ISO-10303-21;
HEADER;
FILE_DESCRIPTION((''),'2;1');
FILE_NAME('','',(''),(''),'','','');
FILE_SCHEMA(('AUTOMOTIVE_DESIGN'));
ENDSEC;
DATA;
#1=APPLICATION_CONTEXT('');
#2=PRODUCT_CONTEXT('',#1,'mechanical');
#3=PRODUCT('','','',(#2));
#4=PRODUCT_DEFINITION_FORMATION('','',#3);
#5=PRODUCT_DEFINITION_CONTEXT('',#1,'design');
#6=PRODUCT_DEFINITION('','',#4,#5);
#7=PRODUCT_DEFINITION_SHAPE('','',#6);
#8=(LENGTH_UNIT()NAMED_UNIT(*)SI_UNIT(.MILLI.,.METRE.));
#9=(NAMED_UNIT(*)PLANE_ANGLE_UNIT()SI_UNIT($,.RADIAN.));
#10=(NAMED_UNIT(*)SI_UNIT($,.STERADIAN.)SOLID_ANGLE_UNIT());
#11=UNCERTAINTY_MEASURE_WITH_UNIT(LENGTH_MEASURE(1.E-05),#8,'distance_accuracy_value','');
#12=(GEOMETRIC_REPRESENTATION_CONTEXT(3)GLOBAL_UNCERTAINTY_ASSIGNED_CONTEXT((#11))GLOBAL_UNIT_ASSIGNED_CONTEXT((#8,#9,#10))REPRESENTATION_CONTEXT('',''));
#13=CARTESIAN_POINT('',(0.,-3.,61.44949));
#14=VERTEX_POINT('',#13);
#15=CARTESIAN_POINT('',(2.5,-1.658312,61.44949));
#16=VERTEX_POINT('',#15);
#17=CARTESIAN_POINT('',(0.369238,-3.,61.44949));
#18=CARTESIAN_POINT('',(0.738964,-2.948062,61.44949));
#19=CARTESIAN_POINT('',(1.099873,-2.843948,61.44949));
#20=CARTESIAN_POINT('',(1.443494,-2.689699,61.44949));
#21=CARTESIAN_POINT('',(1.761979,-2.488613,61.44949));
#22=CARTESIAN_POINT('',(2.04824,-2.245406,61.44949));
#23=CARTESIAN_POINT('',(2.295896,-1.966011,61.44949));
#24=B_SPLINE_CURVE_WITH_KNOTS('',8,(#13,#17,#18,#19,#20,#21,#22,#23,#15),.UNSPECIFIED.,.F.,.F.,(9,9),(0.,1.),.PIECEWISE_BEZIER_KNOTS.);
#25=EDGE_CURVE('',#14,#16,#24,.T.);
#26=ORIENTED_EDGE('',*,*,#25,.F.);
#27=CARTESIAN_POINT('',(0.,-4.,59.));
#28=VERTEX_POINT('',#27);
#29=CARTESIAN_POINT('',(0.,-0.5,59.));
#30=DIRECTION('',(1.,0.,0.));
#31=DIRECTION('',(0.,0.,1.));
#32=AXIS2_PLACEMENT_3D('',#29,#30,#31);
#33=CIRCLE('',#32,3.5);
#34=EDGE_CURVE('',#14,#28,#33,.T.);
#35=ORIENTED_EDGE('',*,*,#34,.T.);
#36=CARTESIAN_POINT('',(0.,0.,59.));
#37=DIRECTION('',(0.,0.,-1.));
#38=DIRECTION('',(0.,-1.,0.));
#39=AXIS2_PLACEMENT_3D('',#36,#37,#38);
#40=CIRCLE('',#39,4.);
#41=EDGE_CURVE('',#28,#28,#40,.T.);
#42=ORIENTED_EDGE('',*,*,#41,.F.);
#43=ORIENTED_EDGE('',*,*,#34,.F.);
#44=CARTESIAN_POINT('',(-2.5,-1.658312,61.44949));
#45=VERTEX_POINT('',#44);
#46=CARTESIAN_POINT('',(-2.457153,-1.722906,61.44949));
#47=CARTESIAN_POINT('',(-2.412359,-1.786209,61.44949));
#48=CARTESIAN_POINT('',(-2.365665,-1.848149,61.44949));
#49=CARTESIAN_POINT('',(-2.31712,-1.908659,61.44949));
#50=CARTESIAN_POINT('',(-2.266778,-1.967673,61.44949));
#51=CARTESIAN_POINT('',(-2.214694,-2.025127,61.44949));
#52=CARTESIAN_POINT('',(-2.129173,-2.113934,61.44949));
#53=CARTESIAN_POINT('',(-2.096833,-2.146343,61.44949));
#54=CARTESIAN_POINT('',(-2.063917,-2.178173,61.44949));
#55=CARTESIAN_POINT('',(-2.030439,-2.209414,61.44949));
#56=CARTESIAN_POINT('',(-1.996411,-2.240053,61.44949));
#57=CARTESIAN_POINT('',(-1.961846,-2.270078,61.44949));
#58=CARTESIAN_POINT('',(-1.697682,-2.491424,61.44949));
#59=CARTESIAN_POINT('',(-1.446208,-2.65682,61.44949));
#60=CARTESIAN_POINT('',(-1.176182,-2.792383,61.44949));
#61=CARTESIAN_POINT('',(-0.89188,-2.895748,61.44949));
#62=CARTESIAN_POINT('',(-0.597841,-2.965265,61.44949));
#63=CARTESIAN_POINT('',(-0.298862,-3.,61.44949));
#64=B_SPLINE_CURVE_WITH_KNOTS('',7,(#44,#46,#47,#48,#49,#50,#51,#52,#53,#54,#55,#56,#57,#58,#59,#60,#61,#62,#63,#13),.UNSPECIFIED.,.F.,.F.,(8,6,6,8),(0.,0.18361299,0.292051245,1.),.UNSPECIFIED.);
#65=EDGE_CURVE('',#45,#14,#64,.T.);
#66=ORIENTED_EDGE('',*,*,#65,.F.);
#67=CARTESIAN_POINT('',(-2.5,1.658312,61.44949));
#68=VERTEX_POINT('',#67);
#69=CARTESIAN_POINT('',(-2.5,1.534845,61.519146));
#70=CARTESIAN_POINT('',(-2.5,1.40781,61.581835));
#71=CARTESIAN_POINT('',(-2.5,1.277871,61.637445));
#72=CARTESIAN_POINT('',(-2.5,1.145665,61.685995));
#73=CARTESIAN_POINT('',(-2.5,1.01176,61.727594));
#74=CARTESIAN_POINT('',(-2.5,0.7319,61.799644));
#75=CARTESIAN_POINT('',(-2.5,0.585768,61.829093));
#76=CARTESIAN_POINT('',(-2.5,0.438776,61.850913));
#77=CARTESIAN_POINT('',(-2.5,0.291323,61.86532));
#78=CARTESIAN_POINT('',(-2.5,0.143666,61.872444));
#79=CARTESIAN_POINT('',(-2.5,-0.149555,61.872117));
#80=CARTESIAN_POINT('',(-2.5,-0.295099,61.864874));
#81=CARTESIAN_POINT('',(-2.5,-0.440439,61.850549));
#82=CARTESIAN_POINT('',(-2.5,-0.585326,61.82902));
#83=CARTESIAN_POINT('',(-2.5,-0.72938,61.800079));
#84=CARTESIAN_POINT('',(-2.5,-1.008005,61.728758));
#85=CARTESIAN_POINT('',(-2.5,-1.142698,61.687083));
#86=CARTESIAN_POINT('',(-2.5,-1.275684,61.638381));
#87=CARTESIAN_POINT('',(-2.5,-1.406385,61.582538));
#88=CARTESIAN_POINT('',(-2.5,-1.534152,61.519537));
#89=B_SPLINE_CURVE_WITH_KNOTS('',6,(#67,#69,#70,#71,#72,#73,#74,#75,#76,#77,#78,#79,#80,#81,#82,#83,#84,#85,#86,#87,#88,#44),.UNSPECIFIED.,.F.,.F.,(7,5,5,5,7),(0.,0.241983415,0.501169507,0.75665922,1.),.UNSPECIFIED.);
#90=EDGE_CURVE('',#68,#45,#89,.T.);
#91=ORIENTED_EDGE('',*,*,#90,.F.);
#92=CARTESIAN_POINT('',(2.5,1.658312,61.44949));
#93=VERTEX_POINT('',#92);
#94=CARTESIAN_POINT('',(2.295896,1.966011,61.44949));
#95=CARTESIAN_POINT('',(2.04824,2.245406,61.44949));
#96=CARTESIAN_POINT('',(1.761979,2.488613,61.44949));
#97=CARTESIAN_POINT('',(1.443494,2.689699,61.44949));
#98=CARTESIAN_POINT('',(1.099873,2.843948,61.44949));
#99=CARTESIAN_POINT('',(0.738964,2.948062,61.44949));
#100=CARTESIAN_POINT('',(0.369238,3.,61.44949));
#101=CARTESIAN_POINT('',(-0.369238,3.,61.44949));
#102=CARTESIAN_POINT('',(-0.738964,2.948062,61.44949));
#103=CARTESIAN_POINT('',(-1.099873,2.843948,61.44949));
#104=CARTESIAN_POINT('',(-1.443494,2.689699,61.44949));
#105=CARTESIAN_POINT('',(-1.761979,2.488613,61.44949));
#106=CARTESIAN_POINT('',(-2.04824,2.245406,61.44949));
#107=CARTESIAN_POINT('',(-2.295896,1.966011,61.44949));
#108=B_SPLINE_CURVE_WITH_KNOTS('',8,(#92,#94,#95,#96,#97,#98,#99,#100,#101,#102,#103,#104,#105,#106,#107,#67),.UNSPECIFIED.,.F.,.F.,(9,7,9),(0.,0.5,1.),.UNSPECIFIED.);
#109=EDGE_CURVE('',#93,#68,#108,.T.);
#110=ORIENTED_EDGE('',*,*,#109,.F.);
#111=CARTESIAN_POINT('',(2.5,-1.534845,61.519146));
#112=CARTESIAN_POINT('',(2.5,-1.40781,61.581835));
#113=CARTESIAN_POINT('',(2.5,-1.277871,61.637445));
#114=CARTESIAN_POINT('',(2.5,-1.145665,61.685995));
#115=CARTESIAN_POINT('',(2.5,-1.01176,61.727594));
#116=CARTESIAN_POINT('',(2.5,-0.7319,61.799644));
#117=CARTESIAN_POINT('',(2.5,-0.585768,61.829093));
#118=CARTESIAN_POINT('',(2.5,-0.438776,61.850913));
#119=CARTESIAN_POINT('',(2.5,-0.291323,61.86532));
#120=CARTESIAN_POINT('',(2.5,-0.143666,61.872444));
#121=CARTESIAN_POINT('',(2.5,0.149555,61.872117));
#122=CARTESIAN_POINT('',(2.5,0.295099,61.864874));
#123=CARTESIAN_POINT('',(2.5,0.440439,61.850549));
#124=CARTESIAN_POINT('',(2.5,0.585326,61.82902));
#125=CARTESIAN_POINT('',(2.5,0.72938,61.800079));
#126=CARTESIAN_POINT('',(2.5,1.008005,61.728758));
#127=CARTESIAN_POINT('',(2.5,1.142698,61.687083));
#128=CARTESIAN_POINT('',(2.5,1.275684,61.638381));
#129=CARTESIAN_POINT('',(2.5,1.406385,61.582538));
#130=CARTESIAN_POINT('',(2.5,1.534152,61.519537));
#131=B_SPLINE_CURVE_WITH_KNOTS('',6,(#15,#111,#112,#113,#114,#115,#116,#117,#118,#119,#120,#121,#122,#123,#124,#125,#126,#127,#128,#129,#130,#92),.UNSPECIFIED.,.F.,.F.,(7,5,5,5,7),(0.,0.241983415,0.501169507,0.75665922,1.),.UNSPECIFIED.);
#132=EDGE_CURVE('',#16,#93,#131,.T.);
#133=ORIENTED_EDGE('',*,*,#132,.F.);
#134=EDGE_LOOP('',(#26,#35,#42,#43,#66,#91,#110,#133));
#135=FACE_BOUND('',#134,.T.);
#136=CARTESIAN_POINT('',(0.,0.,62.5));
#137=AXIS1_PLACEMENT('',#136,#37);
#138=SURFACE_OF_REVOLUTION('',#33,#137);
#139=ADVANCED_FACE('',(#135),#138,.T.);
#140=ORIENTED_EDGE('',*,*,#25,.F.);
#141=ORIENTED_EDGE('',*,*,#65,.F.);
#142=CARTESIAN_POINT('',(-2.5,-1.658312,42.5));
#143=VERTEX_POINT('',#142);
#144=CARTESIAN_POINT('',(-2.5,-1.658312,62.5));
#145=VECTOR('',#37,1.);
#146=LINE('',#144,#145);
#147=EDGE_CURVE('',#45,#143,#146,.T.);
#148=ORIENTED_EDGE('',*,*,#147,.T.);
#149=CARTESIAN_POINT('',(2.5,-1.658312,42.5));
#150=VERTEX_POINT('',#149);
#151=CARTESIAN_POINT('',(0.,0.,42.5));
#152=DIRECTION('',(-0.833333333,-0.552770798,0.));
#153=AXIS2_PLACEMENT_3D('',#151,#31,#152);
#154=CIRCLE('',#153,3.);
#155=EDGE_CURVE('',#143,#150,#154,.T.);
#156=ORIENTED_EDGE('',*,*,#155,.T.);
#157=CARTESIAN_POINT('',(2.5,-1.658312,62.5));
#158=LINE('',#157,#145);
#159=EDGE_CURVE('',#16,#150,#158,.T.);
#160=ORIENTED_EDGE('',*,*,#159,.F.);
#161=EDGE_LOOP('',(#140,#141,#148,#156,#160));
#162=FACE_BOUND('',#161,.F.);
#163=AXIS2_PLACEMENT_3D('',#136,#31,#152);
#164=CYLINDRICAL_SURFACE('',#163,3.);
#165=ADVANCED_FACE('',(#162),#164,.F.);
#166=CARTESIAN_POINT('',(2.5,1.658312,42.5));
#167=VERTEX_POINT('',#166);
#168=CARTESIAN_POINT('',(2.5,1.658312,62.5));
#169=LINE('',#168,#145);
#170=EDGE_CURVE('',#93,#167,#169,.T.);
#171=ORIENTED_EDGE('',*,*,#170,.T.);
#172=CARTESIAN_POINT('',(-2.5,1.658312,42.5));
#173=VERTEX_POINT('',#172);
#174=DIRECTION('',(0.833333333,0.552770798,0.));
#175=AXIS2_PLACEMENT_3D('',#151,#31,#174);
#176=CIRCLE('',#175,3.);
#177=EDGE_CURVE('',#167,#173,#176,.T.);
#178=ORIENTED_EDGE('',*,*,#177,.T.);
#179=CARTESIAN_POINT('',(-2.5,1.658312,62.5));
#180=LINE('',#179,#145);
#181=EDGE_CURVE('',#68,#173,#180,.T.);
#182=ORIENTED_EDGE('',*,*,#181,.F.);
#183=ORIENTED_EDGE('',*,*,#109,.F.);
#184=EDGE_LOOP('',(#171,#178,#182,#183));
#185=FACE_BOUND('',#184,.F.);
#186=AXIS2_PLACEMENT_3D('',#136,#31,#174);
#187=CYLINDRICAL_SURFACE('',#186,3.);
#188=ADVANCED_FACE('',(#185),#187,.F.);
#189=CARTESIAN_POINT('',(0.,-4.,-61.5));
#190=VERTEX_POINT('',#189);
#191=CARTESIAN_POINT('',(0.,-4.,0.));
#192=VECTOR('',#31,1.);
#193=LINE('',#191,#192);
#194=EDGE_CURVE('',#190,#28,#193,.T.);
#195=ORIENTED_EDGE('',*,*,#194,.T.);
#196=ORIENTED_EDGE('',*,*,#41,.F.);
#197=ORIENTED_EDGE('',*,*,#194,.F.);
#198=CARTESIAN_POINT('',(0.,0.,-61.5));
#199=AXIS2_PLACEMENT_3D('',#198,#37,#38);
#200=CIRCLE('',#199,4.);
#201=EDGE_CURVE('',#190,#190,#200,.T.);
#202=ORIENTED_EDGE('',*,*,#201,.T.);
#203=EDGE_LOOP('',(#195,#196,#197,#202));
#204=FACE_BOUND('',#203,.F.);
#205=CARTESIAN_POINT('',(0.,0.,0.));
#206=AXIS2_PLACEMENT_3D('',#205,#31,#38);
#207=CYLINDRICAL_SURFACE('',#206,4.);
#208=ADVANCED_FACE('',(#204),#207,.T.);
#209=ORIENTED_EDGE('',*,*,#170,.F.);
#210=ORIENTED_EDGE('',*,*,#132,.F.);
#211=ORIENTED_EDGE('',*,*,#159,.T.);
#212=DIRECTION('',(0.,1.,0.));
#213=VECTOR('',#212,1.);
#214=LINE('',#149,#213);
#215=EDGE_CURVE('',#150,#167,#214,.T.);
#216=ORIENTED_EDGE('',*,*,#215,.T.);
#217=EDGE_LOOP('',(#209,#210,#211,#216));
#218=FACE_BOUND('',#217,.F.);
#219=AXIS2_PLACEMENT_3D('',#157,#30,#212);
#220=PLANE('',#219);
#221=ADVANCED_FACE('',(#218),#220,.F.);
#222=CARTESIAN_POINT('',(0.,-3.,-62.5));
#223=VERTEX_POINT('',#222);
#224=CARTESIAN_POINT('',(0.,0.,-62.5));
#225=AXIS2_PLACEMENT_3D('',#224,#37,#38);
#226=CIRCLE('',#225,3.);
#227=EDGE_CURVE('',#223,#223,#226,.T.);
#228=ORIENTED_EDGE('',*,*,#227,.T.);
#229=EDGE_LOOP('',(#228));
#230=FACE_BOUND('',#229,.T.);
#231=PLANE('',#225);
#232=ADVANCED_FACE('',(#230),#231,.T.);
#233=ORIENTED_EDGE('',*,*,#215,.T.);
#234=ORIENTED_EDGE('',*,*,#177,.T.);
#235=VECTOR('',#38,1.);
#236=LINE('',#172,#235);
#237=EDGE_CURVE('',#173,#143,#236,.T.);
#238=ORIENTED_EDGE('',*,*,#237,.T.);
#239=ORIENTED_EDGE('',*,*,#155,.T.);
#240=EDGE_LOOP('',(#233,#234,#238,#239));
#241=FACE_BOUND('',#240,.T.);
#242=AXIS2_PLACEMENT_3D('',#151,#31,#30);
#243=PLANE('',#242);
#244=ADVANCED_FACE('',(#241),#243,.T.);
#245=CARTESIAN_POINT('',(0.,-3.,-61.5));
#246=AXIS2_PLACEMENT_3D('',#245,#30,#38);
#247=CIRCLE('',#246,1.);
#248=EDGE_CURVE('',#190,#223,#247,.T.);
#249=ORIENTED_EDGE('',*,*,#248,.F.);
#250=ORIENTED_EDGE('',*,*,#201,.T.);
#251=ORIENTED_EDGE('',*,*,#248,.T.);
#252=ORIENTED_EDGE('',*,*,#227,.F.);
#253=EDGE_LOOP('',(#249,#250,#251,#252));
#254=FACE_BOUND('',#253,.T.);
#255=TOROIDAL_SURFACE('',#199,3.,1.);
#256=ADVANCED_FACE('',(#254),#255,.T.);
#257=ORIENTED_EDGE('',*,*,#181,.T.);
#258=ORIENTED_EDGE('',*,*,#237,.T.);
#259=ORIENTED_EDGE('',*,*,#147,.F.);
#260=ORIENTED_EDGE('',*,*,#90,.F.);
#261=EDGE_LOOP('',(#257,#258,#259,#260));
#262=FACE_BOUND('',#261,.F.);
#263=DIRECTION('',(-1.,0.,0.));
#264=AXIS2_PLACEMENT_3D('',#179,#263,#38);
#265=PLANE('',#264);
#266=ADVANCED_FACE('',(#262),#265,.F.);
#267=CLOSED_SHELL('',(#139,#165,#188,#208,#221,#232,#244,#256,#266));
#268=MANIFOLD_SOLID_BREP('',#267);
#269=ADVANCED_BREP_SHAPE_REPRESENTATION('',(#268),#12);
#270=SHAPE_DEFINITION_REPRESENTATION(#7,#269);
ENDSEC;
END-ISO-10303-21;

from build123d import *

# Parameters (mm, degrees)
F0_W     = 4
F0_H     = 125
F3_DEPTH = 20
F5_R     = 1


# Not quite as in the source:
# - a fillet or chamfer that OpenCascade refuses, or shapes differently, is made with other operations: its cross-section is extruded or revolved along the edge and cut away or added


with BuildPart() as f1:
    # F0 (on Right) → F1 (revolve)
    with BuildSketch(Plane.YZ):
        with Locations((-2, 0)):
            Rectangle(F0_W, F0_H)
    revolve(axis=Axis((0, 0, 0), (0, 0, -1)))

    # F2 (on face) → F3 (cut)
    with BuildSketch(Plane.XY.offset(62.5)):
        with BuildLine():
            Line((-2.5, 1.6583123952), (-2.5, -1.6583123952))
            ThreePointArc((-2.5, -1.6583123952), (0, -3), (2.5, -1.6583123952))
            Line((2.5, -1.6583123952), (2.5, 1.6583123952))
            ThreePointArc((2.5, 1.6583123952), (0, 3), (-2.5, 1.6583123952))
        make_face()
    extrude(amount=-F3_DEPTH, mode=Mode.SUBTRACT)

    # F4: fillet of radius 3.5 on 1 edges, made by hand

    # F4_s1 → F4_t2 (revolve, cut)
    with BuildSketch(Plane.YZ):
        with BuildLine():
            ThreePointArc((-0.5, 62.5), (-2.9748737342, 61.4748737342), (-4, 59))
            Line((-4, 59), (-4, 62.5))
            Line((-4, 62.5), (-0.5, 62.5))
        make_face()
    revolve(axis=Axis((0, 0, 62.5), (0, 0, -1)), mode=Mode.SUBTRACT)

    # F5
    f5_edges = [f1.edges().sort_by_distance(p)[0] for p in [
        (0, 4, -62.5),
    ]]
    fillet(f5_edges, radius=F5_R)


solid = f1.part
